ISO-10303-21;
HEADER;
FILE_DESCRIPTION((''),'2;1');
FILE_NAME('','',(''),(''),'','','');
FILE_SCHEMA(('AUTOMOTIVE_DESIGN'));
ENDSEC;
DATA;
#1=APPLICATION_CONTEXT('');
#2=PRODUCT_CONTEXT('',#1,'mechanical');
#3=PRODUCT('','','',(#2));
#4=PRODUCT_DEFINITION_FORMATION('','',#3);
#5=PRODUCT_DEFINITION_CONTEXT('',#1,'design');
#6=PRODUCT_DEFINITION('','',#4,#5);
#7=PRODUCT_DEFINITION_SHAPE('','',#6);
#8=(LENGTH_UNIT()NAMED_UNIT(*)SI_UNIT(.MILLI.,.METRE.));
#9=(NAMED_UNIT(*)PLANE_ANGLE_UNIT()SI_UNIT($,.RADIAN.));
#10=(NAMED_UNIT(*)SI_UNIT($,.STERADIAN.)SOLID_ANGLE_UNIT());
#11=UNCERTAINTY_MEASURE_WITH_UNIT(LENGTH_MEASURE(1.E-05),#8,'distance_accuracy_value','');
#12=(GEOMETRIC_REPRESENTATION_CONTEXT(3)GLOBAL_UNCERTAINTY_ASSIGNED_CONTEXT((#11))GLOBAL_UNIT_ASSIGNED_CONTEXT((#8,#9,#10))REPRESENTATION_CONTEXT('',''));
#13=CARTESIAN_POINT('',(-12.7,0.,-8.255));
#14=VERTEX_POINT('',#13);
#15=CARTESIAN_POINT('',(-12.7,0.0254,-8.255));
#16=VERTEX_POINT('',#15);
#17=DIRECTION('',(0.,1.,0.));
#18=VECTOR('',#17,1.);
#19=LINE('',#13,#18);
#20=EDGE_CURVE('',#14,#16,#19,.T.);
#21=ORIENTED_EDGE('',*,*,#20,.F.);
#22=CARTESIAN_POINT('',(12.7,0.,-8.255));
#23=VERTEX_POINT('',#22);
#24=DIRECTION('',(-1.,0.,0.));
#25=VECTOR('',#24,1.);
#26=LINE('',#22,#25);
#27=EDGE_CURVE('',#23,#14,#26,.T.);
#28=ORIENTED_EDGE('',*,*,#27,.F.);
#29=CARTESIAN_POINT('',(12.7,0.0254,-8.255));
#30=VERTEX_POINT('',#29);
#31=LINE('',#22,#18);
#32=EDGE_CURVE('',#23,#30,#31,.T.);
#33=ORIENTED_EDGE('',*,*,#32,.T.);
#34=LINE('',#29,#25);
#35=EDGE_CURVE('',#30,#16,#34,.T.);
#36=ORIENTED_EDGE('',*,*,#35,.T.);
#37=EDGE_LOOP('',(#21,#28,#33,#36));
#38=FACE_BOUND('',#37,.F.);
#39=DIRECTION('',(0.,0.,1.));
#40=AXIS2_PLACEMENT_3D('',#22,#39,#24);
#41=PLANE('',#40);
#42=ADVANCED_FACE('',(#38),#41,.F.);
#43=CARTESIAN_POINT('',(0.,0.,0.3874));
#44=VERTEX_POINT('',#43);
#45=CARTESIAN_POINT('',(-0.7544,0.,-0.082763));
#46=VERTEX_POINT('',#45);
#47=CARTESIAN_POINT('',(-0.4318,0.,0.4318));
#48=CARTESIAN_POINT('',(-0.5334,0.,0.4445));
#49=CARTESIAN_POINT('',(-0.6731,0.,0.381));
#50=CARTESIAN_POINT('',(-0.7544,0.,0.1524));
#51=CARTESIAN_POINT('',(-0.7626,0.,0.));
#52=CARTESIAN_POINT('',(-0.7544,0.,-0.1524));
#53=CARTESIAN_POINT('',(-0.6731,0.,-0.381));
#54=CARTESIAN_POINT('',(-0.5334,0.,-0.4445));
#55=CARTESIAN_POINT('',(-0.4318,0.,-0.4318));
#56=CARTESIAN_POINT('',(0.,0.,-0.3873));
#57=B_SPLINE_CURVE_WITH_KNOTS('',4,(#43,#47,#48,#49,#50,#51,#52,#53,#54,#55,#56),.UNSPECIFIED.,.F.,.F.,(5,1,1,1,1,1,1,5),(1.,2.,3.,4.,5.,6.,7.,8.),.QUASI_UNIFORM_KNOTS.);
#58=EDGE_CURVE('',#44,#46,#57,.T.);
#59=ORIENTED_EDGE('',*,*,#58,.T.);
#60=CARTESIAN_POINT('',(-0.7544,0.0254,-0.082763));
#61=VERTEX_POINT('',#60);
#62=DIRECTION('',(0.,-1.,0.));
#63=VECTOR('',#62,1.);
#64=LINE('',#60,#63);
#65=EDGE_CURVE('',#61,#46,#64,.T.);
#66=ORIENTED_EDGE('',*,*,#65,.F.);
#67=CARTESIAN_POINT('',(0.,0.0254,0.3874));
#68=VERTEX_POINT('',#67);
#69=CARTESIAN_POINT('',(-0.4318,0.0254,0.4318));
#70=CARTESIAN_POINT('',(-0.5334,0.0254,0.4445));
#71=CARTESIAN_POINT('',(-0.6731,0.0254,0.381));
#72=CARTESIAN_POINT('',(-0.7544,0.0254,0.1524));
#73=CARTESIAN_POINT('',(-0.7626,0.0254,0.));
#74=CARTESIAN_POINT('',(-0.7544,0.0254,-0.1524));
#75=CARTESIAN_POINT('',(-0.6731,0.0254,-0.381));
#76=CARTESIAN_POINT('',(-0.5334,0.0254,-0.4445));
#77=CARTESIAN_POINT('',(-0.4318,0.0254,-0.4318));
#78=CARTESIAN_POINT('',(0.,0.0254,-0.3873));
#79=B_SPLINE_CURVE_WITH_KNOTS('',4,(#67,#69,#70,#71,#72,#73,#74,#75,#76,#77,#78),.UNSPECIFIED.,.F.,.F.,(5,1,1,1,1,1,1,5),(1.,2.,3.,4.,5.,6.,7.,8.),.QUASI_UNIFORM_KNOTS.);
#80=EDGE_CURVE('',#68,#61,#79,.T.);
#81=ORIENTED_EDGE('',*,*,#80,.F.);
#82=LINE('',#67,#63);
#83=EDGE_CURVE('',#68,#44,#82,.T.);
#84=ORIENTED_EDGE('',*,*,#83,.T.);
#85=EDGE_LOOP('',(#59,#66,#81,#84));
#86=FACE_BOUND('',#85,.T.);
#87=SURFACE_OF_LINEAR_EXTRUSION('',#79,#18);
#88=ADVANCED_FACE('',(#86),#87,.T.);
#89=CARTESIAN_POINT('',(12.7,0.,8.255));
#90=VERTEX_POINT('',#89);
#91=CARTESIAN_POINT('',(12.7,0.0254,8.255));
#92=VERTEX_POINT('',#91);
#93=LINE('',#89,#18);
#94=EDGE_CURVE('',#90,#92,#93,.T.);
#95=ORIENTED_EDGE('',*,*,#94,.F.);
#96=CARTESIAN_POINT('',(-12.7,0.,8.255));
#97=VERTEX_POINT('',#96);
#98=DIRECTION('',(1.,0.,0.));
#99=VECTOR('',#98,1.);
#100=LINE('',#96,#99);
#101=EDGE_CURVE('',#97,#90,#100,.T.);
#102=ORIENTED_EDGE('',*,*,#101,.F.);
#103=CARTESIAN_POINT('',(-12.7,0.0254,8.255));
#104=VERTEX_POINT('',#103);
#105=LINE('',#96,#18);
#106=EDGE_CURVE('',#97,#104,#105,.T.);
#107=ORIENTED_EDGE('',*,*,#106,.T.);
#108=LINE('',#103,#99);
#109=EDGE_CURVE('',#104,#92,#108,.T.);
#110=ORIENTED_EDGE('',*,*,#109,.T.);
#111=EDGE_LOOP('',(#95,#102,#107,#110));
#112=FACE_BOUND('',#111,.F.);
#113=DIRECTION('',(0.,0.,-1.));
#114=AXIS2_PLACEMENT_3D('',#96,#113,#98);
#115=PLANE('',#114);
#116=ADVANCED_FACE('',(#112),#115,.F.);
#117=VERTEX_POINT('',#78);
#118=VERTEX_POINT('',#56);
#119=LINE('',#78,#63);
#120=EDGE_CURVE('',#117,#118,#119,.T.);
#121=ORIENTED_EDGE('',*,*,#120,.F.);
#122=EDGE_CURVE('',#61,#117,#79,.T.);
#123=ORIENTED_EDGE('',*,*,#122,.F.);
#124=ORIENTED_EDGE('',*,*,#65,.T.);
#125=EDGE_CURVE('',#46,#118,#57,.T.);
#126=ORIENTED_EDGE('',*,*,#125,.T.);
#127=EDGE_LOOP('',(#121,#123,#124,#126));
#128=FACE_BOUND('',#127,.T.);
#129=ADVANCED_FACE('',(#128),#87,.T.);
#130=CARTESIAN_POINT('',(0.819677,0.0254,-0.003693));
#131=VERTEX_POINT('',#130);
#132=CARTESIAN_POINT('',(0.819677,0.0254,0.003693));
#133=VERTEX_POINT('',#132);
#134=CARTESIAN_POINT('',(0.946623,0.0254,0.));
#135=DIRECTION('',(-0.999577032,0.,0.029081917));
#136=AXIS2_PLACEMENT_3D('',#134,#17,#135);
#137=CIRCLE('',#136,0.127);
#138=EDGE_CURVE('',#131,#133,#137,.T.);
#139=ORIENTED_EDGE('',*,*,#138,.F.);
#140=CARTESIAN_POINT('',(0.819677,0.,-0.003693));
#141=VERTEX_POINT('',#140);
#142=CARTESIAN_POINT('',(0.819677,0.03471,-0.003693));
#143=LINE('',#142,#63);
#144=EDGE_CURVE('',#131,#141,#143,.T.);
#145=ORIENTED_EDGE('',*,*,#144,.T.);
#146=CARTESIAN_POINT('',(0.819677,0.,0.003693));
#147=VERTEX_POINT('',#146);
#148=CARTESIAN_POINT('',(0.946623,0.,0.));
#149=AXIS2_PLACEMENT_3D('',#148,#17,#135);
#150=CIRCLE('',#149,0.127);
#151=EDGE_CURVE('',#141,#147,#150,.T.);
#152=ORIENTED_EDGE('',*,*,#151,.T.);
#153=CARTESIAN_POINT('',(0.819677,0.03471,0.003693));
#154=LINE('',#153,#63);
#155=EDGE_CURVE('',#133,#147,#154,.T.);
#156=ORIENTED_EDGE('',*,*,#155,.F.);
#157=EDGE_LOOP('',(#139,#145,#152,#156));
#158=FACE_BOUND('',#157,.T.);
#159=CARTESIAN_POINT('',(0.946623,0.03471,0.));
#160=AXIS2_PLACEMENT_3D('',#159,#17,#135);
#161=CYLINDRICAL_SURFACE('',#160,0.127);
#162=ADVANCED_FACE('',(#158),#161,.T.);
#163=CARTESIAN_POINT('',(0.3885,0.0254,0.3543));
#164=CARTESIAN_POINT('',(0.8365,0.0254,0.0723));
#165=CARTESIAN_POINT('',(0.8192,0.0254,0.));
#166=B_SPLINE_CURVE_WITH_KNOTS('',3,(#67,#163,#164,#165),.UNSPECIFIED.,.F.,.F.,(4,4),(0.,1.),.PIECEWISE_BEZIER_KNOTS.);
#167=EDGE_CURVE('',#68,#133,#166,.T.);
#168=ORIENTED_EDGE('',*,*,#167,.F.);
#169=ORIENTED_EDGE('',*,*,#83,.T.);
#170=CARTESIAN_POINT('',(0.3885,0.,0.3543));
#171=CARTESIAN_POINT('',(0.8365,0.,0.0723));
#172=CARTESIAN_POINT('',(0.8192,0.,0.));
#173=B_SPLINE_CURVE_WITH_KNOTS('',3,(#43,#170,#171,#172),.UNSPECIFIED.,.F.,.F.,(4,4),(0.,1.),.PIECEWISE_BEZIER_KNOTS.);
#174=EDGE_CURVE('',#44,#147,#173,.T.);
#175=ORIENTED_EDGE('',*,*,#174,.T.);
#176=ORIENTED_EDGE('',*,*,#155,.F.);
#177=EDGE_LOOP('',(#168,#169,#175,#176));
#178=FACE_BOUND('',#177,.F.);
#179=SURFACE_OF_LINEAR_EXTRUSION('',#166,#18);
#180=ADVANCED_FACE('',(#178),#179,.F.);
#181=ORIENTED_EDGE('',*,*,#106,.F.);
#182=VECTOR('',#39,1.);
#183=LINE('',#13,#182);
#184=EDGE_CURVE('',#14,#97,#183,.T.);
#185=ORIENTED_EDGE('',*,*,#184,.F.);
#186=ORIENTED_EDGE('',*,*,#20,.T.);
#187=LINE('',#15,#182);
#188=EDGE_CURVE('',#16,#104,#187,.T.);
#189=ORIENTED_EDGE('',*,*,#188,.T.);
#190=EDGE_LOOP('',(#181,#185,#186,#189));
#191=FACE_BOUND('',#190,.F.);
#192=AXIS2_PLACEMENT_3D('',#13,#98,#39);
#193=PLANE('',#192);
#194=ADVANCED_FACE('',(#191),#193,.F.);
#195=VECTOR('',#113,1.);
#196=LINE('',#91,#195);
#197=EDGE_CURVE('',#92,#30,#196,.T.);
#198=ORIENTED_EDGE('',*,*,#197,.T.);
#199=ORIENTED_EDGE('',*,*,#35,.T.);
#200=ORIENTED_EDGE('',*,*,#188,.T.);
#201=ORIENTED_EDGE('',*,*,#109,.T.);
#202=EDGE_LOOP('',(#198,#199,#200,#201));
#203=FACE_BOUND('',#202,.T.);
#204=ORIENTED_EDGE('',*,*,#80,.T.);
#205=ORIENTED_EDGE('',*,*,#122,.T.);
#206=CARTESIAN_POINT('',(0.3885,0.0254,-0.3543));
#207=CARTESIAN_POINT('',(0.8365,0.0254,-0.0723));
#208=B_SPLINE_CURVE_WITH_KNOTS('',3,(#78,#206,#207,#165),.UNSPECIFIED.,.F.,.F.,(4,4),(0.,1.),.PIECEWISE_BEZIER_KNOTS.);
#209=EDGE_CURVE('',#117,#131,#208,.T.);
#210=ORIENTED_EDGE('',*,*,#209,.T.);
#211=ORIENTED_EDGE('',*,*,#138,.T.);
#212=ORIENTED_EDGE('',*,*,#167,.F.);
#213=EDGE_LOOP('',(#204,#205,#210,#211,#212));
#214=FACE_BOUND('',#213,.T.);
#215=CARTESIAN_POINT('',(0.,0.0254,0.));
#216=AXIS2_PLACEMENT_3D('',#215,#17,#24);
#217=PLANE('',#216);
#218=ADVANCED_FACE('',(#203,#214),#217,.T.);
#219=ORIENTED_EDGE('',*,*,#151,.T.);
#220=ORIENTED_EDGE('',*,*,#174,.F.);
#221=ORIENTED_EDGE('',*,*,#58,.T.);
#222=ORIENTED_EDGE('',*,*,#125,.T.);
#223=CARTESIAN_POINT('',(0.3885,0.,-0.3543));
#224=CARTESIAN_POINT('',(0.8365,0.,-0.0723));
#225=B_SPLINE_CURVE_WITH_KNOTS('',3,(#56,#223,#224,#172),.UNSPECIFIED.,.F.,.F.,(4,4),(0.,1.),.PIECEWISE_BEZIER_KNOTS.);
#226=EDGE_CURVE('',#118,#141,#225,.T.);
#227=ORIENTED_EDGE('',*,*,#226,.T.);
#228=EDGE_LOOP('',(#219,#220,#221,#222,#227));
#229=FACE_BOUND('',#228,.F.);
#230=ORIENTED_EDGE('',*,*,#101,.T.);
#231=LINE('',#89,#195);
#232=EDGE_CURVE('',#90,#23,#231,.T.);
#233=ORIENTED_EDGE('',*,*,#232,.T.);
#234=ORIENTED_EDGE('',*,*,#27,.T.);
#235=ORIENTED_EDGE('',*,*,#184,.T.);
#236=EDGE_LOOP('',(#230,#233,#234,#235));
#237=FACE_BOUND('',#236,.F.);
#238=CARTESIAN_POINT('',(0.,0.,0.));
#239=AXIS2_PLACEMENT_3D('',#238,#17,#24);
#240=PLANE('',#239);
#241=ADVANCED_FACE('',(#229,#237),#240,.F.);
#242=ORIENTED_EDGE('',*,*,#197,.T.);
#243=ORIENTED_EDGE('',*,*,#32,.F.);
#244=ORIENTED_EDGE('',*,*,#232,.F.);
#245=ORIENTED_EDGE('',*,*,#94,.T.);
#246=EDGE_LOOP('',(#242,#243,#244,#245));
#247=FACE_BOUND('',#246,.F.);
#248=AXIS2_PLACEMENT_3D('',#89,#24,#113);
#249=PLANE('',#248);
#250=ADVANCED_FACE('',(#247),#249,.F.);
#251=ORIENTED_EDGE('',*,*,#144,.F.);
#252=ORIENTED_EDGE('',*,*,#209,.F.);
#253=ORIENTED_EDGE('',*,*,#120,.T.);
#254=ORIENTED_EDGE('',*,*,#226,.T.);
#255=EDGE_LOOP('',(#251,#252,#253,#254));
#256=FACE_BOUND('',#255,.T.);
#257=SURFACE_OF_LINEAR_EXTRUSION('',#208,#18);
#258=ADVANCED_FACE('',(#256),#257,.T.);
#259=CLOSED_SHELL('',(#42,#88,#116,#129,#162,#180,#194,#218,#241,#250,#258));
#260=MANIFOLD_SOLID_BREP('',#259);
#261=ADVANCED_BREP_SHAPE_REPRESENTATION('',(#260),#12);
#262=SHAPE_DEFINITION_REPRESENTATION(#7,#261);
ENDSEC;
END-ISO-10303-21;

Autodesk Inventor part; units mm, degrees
ref_plane "YZ Plane" through (0, 0, 0) normal (1, 0, 0) x (0, 1, 0)
ref_plane "XZ Plane" through (0, 0, 0) normal (0, 1, 0) x (-1, 0, 0)
ref_plane "XY Plane" through (0, 0, 0) normal (0, 0, 1) x (1, 0, 0)
sketch "stock_cut_for_holder" plane through (0, 0, 0) normal (0, 1, 0) x (-1, 0, 0)
  line L0 (-12.7, -8.255) -> (12.7, -8.255)
  line L1 (12.7, -8.255) -> (12.7, 8.255)
  line L2 (12.7, 8.255) -> (-12.7, 8.255)
  line L3 (-12.7, 8.255) -> (-12.7, -8.255)
  line L4 (-12.7, -8.255) -> (12.7, 8.255) construction
  line L5 (12.7, -8.255) -> (-12.7, 8.255) construction
  point P0 (0, 0)
  dimension "cut_shim_height" = 25.4
  dimension "cut_shim_width" = 16.51
extrude "Plate1" add sketch "stock_cut_for_holder" along normal blind 0.0254
sketch "mill_path" plane through (0, 0.0254, 0) normal (0, 1, 0) x (1, 0, 0)
  line L0 (12.7, 8.255) -> (12.7, -8.255) projected
  line L1 (-12.7, 8.255) -> (12.7, 8.255) projected
  line L2 (-12.7, -8.255) -> (-12.7, 8.255) projected
  line L3 (12.7, -8.255) -> (-12.7, -8.255) projected
  line L4 (-12.7, 8.255) -> (-12.7, -8.255) projected
  line L5 (-12.7, 0) -> (12.7, 0) construction
  line L6 (12.7, -8.255) -> (12.7, 8.255) projected
  line L7 (0, 0) -> (0, -0.3873) construction
  line L8 (0, 0) -> (0, 0.3873) construction
  line L9 (-0.4318, 0) -> (-0.4318, -0.4318) construction
  line L10 (-0.4318, 0) -> (-0.4318, 0.4318) construction
  line L11 (0.5715, 0) -> (0.5715, -0.2032) construction
  line L12 (-0.6731, 0) -> (-0.6731, -0.381) construction
  line L13 (0.5715, 0) -> (0.5715, 0.2032) construction
  line L14 (-0.6731, 0) -> (-0.6731, 0.381) construction
  line L15 (-0.5334, 0) -> (-0.5334, -0.4445) construction
  line L16 (-0.5334, 0) -> (-0.5334, 0.4445) construction
  line L17 (0.5715, 0) -> (0.5715, 0.2032) construction
  line L18 (-0.7544, 0) -> (-0.7544, -0.1524) construction
  line L19 (-0.7544, 0) -> (-0.7544, 0.1524)
  line L20 (0.8001, 0) -> (0.8001, -0.0419) construction
  line L21 (0.8001, 0) -> (0.8001, 0.0419) construction
  spline S0 degree 3 poles (0, -0.3874) (0.3885, -0.3543) (0.8365, -0.0723) (0.8192, 0) knots 0 0 0 0 1 1 1 1
  spline S1 degree 3 poles (0, 0.3873) (0.3885, 0.3543) (0.8365, 0.0723) (0.8191, 0) knots 0 0 0 0 1 1 1 1
  line L22 (0, -0.3873) -> (-0.4318, -0.4318) construction
  line L23 (-0.4318, -0.4318) -> (-0.5334, -0.4445) construction
  line L24 (-0.5334, -0.4445) -> (-0.6731, -0.381) construction
  line L25 (-0.6731, -0.381) -> (-0.7544, -0.1524) construction
  line L26 (-0.7544, -0.1524) -> (-0.7626, 0) construction
  line L27 (-0.7626, 0) -> (-0.7544, 0.1524) construction
  line L28 (-0.7544, 0.1524) -> (-0.6731, 0.381) construction
  line L29 (-0.6731, 0.381) -> (-0.5334, 0.4445) construction
  line L30 (-0.5334, 0.4445) -> (-0.4318, 0.4318) construction
  line L31 (-0.4318, 0.4318) -> (0, 0.3873) construction
  spline S2 degree 4 poles (0, -0.3873) (-0.4318, -0.4318) (-0.5334, -0.4445) (-0.6731, -0.381) (-0.7544, -0.1524) (-0.7626, 0) (-0.7544, 0.1524) (-0.6731, 0.381) (-0.5334, 0.4445) (-0.4318, 0.4318) (0, 0.3873) knots 1 1 1 1 1 2 3 4 5 6 7 8 8 8 8 8
  dimension "half_mid_thorax_width" = 0.3874
  dimension "mid_thorax_to_prescutum" = 0.4318
  dimension "w2" = 0.4318
  dimension "d9" = 0.2032
  dimension "mid_thorax_to_anterior_scutellum" = 0.5715
  dimension "d11" = 0.381
  dimension "d13" = 0.4445
  dimension "head_thorax" = 0.1016
  dimension "d15" = 0.1397
  dimension "d17" = 0.1524
  dimension "d18" = 0.0813
  dimension "scutellum_taper" = 0.2286
  dimension "d20" = 0.0419
  dimension "d21" = 0.0191
  dimension "d22" = 0.0083
  dimension "d24" = 0.3226
  dimension "d25" = 1.5818
extrude "milled_hole" cut sketch "mill_path" against normal blind 0.0254 contours S2 S1 S0
fillet "Corner Round1" radius 0.127 1 edges at (0.8192, 0.0127, 0)
equation "\"d26\" = Thickness"
equation "\"BendRadius\" = Thickness"
equation "\"BendReliefWidth\" = Thickness"
equation "\"BendReliefDepth\" = 0.5 * Thickness"
equation "\"CornerReliefSize\" = 4 * Thickness"
equation "\"MinimumRemnant\" = 2 * Thickness"
equation "\"TransitionRadius\" = BendRadius"
equation "\"JacobiRadiusSize\" = BendRadius"
equation "\"GapSize\" = Thickness"
equation "\"d2\" = BendRadius"
equation "\"Thickness\" = 0.0254"
properties part number "standard_antennal_lobe_kumato_v02" material "Stainless Steel AISI 317"
